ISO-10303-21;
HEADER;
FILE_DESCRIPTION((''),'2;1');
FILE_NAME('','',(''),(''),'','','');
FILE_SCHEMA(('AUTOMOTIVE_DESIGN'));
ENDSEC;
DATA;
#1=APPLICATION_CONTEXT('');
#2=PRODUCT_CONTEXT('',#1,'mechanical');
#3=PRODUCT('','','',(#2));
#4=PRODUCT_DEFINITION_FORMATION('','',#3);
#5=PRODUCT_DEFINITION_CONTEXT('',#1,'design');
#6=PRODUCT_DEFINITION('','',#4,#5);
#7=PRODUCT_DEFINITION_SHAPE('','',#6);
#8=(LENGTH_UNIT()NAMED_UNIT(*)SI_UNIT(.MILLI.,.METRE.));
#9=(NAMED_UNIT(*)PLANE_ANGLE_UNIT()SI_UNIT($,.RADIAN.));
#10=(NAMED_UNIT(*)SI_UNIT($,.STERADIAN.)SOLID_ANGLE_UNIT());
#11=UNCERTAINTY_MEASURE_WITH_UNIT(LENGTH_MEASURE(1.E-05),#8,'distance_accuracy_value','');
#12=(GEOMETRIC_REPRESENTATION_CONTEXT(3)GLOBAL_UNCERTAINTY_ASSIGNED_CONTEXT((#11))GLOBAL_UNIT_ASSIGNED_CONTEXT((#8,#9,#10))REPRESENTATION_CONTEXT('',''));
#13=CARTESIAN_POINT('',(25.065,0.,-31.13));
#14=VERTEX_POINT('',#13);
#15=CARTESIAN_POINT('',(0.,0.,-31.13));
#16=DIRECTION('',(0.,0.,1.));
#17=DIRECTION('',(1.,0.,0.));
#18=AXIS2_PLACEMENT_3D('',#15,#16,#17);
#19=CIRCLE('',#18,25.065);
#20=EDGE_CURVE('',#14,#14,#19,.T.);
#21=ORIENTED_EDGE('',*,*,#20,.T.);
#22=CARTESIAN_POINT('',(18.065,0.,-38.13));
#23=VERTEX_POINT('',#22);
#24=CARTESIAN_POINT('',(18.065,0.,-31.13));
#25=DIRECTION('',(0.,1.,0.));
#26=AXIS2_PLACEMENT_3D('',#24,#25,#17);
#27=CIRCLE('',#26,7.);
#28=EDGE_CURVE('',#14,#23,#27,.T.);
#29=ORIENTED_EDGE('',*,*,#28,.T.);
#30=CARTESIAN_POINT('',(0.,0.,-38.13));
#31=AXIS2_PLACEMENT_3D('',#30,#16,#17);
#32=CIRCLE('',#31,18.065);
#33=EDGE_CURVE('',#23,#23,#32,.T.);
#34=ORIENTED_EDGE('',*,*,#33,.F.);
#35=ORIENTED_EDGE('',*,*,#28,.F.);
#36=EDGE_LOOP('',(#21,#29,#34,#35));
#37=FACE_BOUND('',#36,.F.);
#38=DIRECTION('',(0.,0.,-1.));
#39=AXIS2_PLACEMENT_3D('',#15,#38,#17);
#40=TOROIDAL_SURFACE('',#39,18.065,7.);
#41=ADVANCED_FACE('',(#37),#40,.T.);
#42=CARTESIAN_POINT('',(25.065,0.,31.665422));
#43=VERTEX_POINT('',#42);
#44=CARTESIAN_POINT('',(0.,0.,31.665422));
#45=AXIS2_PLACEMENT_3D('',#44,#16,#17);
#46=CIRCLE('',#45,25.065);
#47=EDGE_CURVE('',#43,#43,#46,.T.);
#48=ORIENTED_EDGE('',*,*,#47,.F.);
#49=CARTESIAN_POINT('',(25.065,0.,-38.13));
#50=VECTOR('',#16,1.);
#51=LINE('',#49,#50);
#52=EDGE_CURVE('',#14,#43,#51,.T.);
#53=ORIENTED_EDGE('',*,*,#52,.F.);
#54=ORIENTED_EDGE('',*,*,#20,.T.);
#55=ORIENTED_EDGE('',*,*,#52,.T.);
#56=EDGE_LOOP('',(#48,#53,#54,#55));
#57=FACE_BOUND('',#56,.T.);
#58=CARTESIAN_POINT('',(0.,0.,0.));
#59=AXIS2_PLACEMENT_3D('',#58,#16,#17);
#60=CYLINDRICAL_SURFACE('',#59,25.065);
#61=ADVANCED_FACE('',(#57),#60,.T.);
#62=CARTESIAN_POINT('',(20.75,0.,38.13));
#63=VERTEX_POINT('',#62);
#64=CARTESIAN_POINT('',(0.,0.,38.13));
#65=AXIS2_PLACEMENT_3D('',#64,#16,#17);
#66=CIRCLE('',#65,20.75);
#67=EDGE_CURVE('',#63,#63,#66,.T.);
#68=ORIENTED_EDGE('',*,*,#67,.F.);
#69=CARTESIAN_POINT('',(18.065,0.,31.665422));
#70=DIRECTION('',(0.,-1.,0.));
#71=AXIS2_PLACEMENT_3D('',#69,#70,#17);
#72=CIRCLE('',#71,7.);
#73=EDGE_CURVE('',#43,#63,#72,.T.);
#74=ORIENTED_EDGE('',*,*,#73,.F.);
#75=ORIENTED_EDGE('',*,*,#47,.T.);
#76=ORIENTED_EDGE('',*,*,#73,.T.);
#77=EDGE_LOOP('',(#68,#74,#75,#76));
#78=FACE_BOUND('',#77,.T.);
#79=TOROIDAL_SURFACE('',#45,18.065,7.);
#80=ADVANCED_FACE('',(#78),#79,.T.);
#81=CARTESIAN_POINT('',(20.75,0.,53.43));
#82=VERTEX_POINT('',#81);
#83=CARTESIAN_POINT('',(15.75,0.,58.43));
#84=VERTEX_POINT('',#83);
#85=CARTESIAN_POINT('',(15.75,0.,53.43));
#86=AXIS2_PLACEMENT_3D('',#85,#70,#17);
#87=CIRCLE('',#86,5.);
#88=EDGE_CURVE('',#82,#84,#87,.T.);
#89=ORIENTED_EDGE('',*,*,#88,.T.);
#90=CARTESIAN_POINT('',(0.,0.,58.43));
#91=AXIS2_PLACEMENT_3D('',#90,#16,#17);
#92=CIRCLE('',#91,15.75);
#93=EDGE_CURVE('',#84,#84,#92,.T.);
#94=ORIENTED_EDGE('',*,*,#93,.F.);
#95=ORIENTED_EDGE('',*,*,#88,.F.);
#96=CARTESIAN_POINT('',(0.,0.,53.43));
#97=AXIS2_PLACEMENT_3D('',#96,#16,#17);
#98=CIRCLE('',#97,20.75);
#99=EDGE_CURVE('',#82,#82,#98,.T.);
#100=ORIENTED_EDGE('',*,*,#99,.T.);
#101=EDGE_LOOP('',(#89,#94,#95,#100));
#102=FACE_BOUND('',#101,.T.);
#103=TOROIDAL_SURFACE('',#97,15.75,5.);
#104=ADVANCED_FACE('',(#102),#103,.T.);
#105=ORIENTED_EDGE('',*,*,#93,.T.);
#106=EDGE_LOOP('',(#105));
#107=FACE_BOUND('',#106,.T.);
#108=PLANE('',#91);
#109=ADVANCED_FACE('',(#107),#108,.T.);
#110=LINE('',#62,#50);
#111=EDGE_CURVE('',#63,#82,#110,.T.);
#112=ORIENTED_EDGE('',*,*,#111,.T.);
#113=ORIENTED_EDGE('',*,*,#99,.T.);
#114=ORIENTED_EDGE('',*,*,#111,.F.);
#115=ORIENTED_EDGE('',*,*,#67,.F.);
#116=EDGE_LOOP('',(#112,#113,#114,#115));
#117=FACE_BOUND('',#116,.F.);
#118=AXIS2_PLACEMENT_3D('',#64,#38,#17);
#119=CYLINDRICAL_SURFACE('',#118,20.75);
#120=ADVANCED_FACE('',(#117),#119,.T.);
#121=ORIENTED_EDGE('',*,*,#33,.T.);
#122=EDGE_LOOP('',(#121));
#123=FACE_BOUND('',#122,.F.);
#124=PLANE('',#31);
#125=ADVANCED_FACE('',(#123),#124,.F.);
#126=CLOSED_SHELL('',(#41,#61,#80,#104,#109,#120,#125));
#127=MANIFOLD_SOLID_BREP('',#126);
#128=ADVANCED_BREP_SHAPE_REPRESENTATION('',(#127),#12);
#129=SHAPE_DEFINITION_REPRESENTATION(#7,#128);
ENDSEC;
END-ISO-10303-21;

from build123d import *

# Parameters (mm, degrees)
F0_R     = 25.065
F1_DEPTH = 38.13
F2_R     = 20.75
F3_DEPTH = 20.3
F5_R     = 5


# Not quite as in the source:
# - a fillet or chamfer that OpenCascade refuses, or shapes differently, is made with other operations: its cross-section is extruded or revolved along the edge and cut away or added


with BuildPart() as f1:
    # F0 (on Top) → F1 (new body, symmetric)
    with BuildSketch(Plane.XY):
        Circle(F0_R)
    extrude(amount=F1_DEPTH, both=True)

    # F2 (on face) → F3 (join)
    with BuildSketch(Plane.XY.offset(38.13)):
        Circle(F2_R)
    extrude(amount=F3_DEPTH)

    # F4: fillet of radius 7 on 2 edges, made by hand

    # F4_s1 → F4_t2 (revolve, cut)
    with BuildSketch(Plane.XZ):
        with BuildLine():
            ThreePointArc((25.065, 31.6654215141), (23.8871559581, 35.5516150245), (20.75, 38.13))
            Line((20.75, 38.13), (25.065, 38.13))
            Line((25.065, 38.13), (25.065, 31.6654215141))
        make_face()
    revolve(axis=Axis((0, 0, 38.13), (0, 0, 1)), mode=Mode.SUBTRACT)

    # F4_s3 → F4_t4 (revolve, cut)
    with BuildSketch(Plane.XZ):
        with BuildLine():
            ThreePointArc((25.065, -31.13), (23.0147474683, -36.0797474683), (18.065, -38.13))
            Line((18.065, -38.13), (25.065, -38.13))
            Line((25.065, -38.13), (25.065, -31.13))
        make_face()
    revolve(axis=Axis((0, 0, -38.13), (0, 0, 1)), mode=Mode.SUBTRACT)

    # F5
    f5_edges = [f1.edges().sort_by_distance(p)[0] for p in [
        (-20.75, 0, 58.43),
    ]]
    fillet(f5_edges, radius=F5_R)


solid = f1.part
